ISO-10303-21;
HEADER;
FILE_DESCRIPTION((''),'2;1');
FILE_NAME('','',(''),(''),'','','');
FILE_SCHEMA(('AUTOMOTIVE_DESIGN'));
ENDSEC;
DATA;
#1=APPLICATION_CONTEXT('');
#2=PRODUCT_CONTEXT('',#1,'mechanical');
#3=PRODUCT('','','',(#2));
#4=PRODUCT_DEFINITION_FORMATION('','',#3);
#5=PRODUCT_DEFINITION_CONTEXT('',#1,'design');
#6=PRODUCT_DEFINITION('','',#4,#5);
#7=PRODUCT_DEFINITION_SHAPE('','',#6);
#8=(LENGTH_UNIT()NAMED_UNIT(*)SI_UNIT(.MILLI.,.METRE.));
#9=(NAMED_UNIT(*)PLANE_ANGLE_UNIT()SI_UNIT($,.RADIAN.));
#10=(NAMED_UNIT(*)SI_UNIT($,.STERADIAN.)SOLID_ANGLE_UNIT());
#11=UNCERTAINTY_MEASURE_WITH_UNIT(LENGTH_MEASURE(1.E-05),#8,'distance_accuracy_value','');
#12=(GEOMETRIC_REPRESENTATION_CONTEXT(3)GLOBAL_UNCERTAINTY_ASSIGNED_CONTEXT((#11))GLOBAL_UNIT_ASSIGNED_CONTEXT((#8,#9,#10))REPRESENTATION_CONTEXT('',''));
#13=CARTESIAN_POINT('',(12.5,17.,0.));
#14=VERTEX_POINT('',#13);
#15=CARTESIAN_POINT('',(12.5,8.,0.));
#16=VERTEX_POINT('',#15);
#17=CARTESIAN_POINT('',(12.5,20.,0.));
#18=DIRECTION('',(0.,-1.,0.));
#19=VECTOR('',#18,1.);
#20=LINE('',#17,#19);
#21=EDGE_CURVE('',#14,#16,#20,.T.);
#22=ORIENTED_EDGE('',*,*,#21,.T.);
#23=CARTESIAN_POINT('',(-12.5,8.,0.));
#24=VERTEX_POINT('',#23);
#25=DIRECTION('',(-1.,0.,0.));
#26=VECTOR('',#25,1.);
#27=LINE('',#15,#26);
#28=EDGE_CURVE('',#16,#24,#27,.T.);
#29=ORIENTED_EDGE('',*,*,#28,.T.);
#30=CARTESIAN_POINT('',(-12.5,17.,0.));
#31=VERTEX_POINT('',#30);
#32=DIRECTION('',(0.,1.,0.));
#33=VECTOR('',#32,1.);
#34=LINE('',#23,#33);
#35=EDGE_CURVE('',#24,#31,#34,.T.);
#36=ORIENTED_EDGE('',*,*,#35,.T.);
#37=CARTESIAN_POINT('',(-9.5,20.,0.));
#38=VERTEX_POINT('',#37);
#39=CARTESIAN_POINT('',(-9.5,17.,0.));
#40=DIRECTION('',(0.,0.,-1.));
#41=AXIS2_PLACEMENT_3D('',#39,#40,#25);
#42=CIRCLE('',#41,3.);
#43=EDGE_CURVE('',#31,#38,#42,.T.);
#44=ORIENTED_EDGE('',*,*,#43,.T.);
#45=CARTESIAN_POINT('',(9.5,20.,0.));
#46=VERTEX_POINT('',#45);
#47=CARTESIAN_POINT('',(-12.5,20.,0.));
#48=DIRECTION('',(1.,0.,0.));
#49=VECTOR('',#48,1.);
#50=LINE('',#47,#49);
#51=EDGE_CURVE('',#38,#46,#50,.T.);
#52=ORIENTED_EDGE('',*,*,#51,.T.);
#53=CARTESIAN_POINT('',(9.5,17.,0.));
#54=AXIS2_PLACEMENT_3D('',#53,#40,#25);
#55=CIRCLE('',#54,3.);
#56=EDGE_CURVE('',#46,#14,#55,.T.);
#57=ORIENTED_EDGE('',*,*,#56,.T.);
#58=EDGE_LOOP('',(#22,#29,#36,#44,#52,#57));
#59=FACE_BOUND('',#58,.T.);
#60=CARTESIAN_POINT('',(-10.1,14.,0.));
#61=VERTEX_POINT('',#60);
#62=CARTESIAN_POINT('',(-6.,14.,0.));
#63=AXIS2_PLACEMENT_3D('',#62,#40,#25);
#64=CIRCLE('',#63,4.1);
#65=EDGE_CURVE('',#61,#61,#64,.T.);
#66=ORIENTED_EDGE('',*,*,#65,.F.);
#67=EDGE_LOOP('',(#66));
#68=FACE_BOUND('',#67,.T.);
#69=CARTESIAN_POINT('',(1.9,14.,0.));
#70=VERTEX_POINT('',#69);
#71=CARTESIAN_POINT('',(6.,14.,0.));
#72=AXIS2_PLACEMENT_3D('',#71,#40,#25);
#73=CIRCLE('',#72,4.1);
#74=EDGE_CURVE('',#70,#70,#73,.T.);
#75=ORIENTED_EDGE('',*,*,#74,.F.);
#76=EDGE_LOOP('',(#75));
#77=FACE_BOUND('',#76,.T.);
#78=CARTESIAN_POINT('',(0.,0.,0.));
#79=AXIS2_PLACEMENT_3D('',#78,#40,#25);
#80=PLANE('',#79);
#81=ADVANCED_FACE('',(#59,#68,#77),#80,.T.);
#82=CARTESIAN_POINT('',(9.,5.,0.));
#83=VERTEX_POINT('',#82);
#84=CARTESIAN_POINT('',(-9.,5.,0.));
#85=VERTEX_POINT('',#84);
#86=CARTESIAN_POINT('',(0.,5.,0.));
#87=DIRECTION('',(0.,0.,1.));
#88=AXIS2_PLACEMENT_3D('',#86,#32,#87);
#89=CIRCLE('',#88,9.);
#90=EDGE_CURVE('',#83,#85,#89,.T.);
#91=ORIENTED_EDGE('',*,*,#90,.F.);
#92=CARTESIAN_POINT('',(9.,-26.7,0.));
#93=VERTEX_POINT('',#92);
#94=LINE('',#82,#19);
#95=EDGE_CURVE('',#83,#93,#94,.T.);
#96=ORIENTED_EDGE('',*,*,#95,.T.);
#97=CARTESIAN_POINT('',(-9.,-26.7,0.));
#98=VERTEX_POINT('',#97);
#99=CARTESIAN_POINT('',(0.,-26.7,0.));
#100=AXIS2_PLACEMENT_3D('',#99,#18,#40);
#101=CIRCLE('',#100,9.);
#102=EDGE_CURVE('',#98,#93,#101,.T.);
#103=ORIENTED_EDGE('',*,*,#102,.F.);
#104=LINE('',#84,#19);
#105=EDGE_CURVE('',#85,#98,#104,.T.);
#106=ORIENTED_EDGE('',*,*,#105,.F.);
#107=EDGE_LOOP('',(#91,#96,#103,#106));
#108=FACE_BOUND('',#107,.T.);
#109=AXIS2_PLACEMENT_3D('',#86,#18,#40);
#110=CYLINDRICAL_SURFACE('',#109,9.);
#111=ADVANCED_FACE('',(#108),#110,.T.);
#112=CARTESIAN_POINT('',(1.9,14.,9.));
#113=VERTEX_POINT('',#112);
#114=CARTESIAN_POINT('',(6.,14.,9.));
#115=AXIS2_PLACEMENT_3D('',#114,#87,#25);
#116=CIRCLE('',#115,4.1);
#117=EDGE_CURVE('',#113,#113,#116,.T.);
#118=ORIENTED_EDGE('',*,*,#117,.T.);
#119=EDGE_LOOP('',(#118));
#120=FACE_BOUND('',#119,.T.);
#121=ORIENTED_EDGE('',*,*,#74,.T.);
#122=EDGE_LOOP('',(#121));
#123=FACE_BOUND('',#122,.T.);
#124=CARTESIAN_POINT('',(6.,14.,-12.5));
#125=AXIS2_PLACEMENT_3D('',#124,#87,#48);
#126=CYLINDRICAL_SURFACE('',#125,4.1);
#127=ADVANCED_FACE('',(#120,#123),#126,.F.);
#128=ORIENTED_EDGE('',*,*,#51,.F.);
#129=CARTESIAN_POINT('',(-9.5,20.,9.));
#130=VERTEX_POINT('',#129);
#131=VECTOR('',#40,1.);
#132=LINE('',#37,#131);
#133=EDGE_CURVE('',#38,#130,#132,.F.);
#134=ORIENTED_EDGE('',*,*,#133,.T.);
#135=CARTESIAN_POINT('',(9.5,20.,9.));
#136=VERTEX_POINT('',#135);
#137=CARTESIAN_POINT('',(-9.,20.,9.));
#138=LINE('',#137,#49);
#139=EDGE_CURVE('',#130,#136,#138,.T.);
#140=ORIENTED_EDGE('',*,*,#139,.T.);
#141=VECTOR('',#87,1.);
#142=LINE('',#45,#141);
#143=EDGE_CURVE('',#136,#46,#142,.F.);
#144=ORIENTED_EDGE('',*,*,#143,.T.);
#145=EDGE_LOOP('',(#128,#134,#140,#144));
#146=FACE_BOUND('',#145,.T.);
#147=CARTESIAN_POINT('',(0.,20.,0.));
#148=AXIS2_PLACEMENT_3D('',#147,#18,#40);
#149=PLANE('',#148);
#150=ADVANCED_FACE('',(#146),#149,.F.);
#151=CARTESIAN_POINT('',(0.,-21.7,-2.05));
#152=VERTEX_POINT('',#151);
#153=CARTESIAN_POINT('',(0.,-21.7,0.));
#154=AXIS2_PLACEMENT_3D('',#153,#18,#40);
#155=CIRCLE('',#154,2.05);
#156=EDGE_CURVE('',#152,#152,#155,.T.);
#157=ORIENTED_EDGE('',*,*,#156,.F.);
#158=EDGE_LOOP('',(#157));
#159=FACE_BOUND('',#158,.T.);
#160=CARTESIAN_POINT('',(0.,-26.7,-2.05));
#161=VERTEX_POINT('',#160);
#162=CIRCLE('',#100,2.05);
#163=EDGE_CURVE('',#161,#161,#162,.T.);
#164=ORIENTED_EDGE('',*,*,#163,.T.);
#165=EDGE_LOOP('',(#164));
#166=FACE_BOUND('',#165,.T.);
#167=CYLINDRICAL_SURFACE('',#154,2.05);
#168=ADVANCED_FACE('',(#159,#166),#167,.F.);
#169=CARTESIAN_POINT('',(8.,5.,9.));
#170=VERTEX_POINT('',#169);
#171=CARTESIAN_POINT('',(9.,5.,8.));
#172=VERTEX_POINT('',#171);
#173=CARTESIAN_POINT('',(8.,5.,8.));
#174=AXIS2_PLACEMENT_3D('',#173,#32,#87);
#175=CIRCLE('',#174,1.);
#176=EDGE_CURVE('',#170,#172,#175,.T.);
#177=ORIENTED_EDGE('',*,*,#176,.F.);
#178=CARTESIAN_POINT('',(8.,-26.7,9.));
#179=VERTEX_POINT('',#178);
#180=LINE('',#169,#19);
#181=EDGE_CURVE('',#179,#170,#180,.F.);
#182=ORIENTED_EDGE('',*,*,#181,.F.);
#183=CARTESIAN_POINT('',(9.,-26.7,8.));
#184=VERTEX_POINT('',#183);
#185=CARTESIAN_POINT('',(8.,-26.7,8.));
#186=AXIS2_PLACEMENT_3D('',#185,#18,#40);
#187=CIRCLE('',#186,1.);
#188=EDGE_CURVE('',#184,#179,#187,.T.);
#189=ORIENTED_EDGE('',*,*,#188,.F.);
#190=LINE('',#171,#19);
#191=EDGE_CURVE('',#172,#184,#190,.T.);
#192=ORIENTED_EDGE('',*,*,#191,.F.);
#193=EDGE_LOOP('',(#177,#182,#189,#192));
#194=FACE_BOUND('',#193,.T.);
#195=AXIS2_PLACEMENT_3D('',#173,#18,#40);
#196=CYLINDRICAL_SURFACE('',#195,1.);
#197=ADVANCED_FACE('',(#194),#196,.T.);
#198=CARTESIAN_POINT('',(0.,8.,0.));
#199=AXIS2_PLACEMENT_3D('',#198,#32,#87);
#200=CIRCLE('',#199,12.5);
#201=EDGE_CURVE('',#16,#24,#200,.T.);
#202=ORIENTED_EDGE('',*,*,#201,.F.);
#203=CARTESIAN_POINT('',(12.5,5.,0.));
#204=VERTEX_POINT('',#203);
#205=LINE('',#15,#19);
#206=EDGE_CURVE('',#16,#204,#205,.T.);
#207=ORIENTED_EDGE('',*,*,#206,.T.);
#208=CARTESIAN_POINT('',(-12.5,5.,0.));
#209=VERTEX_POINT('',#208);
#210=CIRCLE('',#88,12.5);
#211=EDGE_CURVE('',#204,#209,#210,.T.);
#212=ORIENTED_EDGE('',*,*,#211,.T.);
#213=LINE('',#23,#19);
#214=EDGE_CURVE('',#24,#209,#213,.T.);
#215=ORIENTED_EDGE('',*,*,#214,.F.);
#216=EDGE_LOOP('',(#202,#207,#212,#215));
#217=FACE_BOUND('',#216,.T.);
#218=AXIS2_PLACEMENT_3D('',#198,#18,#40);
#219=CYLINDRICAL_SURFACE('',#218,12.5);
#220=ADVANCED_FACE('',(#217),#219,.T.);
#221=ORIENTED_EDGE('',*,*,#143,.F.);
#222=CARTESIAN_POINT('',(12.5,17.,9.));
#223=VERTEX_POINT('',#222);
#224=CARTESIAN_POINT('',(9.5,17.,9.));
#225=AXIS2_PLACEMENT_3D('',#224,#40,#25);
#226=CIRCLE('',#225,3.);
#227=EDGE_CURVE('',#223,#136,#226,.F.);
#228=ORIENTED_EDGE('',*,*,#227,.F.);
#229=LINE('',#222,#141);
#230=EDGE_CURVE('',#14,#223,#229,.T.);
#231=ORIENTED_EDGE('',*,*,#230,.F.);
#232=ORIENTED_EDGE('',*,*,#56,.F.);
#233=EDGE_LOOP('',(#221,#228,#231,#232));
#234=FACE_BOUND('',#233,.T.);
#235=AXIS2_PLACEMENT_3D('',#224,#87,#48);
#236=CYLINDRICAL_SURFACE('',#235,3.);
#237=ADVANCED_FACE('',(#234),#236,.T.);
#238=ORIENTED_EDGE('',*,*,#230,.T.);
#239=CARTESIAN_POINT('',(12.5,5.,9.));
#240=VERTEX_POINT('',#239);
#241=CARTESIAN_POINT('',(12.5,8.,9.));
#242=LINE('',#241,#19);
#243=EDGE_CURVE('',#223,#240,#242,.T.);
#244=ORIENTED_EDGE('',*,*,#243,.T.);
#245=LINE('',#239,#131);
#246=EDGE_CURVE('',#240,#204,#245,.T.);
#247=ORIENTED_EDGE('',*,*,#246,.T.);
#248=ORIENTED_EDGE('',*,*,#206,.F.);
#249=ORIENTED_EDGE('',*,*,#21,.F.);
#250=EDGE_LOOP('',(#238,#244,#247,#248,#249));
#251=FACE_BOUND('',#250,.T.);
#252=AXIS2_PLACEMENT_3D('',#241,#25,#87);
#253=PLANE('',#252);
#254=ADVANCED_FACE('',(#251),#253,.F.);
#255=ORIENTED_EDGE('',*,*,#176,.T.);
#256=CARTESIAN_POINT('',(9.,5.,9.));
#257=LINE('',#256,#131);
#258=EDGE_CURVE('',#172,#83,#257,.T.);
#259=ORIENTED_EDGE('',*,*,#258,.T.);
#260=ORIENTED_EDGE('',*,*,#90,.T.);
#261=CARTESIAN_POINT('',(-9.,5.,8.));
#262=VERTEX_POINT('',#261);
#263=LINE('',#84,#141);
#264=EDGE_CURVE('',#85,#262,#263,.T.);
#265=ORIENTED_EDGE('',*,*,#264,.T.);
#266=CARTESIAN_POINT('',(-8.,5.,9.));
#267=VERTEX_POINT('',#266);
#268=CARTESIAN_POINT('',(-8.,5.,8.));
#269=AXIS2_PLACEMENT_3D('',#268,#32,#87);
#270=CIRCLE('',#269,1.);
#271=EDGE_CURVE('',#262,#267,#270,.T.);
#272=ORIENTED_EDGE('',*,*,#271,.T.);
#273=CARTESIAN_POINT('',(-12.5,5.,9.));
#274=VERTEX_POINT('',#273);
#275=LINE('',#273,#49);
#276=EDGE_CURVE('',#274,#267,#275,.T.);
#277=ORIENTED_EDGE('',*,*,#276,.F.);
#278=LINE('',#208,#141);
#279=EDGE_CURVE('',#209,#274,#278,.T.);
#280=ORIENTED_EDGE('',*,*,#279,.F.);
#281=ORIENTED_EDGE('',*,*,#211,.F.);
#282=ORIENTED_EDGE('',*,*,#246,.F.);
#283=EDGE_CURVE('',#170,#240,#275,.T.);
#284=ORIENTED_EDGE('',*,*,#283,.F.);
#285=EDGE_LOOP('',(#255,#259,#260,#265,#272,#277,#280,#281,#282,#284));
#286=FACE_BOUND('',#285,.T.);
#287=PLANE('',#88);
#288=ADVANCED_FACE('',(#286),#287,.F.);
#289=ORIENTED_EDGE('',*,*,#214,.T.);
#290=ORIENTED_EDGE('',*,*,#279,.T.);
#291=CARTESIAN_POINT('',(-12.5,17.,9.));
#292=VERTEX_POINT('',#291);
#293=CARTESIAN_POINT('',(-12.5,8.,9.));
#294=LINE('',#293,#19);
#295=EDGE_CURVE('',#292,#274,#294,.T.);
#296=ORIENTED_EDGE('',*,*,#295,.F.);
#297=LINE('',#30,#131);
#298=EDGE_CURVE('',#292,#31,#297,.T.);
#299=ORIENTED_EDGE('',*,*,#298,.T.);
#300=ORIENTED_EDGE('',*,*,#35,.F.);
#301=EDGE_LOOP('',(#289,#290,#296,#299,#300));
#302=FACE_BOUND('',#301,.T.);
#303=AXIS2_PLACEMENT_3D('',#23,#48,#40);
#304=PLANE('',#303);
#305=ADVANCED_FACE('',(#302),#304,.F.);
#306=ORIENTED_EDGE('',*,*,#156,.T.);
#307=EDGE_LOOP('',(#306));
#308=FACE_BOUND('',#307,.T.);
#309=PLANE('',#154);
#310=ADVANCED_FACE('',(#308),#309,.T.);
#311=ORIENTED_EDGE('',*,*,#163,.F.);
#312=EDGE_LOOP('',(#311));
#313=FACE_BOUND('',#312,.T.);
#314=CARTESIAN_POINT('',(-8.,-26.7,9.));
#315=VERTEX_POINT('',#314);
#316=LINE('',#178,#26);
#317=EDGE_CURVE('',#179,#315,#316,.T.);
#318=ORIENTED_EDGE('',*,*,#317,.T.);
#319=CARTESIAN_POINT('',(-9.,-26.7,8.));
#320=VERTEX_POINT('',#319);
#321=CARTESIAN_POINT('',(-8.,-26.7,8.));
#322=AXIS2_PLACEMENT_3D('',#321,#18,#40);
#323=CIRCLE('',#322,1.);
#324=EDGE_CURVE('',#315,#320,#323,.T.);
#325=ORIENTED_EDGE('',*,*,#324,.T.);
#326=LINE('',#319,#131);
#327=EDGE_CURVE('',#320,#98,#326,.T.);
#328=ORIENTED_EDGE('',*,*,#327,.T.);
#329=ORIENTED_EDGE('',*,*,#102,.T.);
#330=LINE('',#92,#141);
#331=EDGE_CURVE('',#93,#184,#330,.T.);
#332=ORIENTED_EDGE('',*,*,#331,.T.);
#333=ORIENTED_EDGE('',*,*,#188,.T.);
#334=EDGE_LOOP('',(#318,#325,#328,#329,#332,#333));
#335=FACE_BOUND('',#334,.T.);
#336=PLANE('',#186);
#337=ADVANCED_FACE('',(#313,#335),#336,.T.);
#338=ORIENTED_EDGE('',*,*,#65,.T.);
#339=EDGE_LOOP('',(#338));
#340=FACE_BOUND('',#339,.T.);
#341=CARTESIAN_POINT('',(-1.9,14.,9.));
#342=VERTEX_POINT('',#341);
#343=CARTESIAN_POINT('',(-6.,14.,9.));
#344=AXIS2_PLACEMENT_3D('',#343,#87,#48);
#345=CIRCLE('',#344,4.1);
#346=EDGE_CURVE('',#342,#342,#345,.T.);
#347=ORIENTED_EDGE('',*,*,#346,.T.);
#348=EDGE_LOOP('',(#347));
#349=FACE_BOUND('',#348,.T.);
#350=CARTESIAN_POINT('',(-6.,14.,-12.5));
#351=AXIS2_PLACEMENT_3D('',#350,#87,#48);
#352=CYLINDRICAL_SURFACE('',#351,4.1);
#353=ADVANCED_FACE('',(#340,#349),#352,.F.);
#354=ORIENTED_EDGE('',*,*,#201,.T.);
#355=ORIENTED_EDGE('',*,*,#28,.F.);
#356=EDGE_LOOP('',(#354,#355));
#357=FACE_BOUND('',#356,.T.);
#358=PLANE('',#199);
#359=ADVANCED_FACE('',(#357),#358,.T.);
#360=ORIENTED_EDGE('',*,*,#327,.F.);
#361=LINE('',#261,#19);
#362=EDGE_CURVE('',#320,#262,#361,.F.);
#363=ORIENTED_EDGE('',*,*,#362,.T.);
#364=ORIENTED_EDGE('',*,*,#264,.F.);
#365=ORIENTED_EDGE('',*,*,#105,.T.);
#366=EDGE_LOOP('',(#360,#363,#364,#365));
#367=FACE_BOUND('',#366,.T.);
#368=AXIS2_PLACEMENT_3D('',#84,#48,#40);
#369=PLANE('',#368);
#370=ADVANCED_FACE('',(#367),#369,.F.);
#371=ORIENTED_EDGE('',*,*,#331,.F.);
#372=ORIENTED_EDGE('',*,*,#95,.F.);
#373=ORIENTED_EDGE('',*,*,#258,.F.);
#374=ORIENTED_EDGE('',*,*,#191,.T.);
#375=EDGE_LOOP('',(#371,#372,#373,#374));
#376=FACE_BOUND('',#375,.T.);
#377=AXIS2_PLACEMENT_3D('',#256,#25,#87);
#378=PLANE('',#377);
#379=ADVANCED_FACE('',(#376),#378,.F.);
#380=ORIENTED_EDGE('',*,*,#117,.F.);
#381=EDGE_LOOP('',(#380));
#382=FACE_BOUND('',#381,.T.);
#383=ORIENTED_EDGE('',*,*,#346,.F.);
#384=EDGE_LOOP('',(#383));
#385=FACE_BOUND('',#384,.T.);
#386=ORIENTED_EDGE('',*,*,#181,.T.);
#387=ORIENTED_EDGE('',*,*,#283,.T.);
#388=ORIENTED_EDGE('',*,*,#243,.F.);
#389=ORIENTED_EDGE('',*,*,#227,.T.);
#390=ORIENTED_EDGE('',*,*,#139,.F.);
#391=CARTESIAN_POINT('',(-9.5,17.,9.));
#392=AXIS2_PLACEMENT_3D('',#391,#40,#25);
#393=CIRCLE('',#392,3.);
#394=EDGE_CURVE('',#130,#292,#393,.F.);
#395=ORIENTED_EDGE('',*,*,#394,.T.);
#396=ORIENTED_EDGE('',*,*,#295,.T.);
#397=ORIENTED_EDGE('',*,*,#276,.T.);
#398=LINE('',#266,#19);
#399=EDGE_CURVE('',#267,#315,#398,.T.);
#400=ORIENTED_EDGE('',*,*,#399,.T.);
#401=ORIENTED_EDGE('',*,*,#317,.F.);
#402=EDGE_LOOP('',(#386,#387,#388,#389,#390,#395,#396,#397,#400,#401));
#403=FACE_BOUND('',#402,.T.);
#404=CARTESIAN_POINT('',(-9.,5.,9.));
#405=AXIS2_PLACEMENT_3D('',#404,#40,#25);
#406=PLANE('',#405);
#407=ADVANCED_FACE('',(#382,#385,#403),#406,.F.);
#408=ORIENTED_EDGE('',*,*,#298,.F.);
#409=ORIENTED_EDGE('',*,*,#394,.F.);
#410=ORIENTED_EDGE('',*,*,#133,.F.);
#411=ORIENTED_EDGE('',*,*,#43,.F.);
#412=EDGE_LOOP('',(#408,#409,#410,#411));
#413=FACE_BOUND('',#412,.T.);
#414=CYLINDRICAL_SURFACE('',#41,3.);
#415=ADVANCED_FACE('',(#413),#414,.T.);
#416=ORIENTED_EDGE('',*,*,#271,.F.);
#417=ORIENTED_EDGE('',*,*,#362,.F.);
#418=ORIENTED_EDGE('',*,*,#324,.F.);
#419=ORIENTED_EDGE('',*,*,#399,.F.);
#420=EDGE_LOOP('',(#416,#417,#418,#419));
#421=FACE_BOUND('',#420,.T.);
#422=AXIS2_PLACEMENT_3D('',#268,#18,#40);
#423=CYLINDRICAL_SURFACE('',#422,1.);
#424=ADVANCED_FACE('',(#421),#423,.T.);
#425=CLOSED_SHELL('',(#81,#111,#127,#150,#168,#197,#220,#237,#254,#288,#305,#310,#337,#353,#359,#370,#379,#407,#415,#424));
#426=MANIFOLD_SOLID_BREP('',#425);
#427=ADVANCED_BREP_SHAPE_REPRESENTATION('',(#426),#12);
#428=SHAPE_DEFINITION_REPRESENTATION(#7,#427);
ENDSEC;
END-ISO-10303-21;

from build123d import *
from build123d.topology import SkipClean

# Parameters (mm, degrees)
SKETCH_1_R          = 7.6
EXTRUDE_1_DEPTH     = 5
SKETCH_2_W          = 18
SKETCH_2_H          = 5
EXTRUDE_2_DEPTH     = 15
EXTRUDE_3_DEPTH     = 3
SKETCH_5_W          = 3.5
SKETCH_5_H          = 5
EXTRUDE_4_DEPTH     = 12
SKETCH_3_R          = 4.1
CUT_EXTRUDE_1_DEPTH = 32.913946794
FILLET_4_R          = 1
SKETCH_6_W          = 25
SKETCH_6_H          = 12
SKETCH_6_R          = 4.1
EXTRUDE_5_DEPTH     = 4
FILLET_5_R          = 3
SKETCH_7_R          = 8.4
EXTRUDE_6_DEPTH     = 26.7
SKETCH_9_R          = 8.4
EXTRUDE_8_DEPTH     = 31.7
SKETCH_10_R         = 2.05
CUT_EXTRUDE_2_DEPTH = 5


with BuildPart() as part:
    # ｽｹｯﾁ1 → ﾎﾞｽ - 押し出し1 (new body)
    with BuildSketch(Plane(origin=(0, 0, 0), x_dir=(1, 0, 0), z_dir=(0, 1, 0))):
        with BuildLine():
            Line((-9, 0), (-9, -9))
            Line((-9, -9), (9, -9))
            Line((9, -9), (9, 0))
            ThreePointArc((9, 0), (0, 9), (-9, 0))
        make_face()
        with Locations(Location((0, 0, 0), (0, 0, 270))):
            Circle(SKETCH_1_R, mode=Mode.SUBTRACT)
    extrude(amount=EXTRUDE_1_DEPTH)

    # ｽｹｯﾁ2 → ﾎﾞｽ - 押し出し2 (add)
    with BuildSketch(Plane(origin=(0, 5, 0), x_dir=(1, 0, 0), z_dir=(0, 1, 0))):
        with Locations((0, -6.5)):
            Rectangle(SKETCH_2_W, SKETCH_2_H)
    extrude(amount=EXTRUDE_2_DEPTH)

    # ｽｹｯﾁ4 → ﾎﾞｽ - 押し出し3 (add)
    with BuildSketch(Plane(origin=(0, 5, 0), x_dir=(1, 0, 0), z_dir=(0, 1, 0))):
        with BuildLine():
            Line((-12.5, 0), (-12.5, -9))
            Line((-12.5, -9), (12.5, -9))
            Line((12.5, -9), (12.5, 0))
            ThreePointArc((12.5, 0), (0, 12.5), (-12.5, 0))
        make_face()
    extrude(amount=EXTRUDE_3_DEPTH)

    # ｽｹｯﾁ5 → ﾎﾞｽ - 押し出し4 (add)
    with BuildSketch(Plane(origin=(0, 8, 0), x_dir=(1, 0, 0), z_dir=(0, 1, 0))):
        with Locations((-10.75, -6.5)):
            Rectangle(SKETCH_5_W, SKETCH_5_H)
        with Locations((10.75, -6.5)):
            Rectangle(SKETCH_5_W, SKETCH_5_H)
    extrude(amount=EXTRUDE_4_DEPTH)

    # ｽｹｯﾁ3 → ｶｯﾄ - 押し出し1 (cut, through all)
    with BuildSketch(Plane.XY.offset(9)):
        with Locations((-6, 14)):
            Circle(SKETCH_3_R)
        with Locations((6, 14)):
            Circle(SKETCH_3_R)
    extrude(amount=-CUT_EXTRUDE_1_DEPTH, mode=Mode.SUBTRACT)

    # ﾌｨﾚｯﾄ4
    fillet_4_edges = [part.edges().sort_by_distance(p)[0] for p in [
        (9, 2.5, 9),
        (-9, 2.5, 9),
    ]]
    fillet(fillet_4_edges, radius=FILLET_4_R)

    # ｽｹｯﾁ6 → ﾎﾞｽ - 押し出し5 (add)
    with SkipClean():  # the faces are left unmerged after this step: merging them gives an invalid solid
        with BuildSketch(Plane(origin=(0, 0, 4), x_dir=(-1, 0, 0), z_dir=(0, 0, -1))):
            with Locations((0, 14)):
                Rectangle(SKETCH_6_W, SKETCH_6_H)
            with Locations((-6, 14)):
                Circle(SKETCH_6_R, mode=Mode.SUBTRACT)
            with Locations(Location((6, 14, 0), (0, 0, 180))):
                Circle(SKETCH_6_R, mode=Mode.SUBTRACT)
        extrude(amount=EXTRUDE_5_DEPTH)
    add(part.part.scale(1), mode=Mode.REPLACE)  # the faces are merged on a copy

    # ﾌｨﾚｯﾄ5
    fillet_5_edges = [part.edges().sort_by_distance(p)[0] for p in [
        (-12.5, 20, 4.5),
        (12.5, 20, 4.5),
    ]]
    fillet(fillet_5_edges, radius=FILLET_5_R)

    # ｽｹｯﾁ7 → ﾎﾞｽ - 押し出し6 (add)
    with SkipClean():  # the faces are left unmerged after this step: merging them gives an invalid solid
        with BuildSketch(Plane.XZ):
            with BuildLine():
                Line((8, 9), (-8, 9))
                ThreePointArc((-8, 9), (-8.707106781, 8.707106781), (-9, 8))
                Line((-9, 8), (-9, 0))
                ThreePointArc((-9, 0), (0, -9), (9, 0))
                Line((9, 0), (9, 8))
                ThreePointArc((9, 8), (8.707106781, 8.707106781), (8, 9))
            make_face()
            with Locations(Location((0, 0, 0), (0, 0, 270))):
                Circle(SKETCH_7_R, mode=Mode.SUBTRACT)
        extrude(amount=EXTRUDE_6_DEPTH)

    # ｽｹｯﾁ9 → ﾎﾞｽ - 押し出し8 (add)
    with SkipClean():  # the faces are left unmerged after this step: merging them gives an invalid solid
        with BuildSketch(Plane.XZ.offset(-5)):
            Circle(SKETCH_9_R)
        extrude(amount=EXTRUDE_8_DEPTH)

    # ｽｹｯﾁ10 → ｶｯﾄ - 押し出し2 (cut)
    with SkipClean():  # the faces are left unmerged after this step: merging them gives an invalid solid
        with BuildSketch(Plane.XZ.offset(26.7)):
            with Locations(Location((0, 0, 0), (0, 0, 270))):
                Circle(SKETCH_10_R)
        extrude(amount=-CUT_EXTRUDE_2_DEPTH, mode=Mode.SUBTRACT)


solid = part.part
